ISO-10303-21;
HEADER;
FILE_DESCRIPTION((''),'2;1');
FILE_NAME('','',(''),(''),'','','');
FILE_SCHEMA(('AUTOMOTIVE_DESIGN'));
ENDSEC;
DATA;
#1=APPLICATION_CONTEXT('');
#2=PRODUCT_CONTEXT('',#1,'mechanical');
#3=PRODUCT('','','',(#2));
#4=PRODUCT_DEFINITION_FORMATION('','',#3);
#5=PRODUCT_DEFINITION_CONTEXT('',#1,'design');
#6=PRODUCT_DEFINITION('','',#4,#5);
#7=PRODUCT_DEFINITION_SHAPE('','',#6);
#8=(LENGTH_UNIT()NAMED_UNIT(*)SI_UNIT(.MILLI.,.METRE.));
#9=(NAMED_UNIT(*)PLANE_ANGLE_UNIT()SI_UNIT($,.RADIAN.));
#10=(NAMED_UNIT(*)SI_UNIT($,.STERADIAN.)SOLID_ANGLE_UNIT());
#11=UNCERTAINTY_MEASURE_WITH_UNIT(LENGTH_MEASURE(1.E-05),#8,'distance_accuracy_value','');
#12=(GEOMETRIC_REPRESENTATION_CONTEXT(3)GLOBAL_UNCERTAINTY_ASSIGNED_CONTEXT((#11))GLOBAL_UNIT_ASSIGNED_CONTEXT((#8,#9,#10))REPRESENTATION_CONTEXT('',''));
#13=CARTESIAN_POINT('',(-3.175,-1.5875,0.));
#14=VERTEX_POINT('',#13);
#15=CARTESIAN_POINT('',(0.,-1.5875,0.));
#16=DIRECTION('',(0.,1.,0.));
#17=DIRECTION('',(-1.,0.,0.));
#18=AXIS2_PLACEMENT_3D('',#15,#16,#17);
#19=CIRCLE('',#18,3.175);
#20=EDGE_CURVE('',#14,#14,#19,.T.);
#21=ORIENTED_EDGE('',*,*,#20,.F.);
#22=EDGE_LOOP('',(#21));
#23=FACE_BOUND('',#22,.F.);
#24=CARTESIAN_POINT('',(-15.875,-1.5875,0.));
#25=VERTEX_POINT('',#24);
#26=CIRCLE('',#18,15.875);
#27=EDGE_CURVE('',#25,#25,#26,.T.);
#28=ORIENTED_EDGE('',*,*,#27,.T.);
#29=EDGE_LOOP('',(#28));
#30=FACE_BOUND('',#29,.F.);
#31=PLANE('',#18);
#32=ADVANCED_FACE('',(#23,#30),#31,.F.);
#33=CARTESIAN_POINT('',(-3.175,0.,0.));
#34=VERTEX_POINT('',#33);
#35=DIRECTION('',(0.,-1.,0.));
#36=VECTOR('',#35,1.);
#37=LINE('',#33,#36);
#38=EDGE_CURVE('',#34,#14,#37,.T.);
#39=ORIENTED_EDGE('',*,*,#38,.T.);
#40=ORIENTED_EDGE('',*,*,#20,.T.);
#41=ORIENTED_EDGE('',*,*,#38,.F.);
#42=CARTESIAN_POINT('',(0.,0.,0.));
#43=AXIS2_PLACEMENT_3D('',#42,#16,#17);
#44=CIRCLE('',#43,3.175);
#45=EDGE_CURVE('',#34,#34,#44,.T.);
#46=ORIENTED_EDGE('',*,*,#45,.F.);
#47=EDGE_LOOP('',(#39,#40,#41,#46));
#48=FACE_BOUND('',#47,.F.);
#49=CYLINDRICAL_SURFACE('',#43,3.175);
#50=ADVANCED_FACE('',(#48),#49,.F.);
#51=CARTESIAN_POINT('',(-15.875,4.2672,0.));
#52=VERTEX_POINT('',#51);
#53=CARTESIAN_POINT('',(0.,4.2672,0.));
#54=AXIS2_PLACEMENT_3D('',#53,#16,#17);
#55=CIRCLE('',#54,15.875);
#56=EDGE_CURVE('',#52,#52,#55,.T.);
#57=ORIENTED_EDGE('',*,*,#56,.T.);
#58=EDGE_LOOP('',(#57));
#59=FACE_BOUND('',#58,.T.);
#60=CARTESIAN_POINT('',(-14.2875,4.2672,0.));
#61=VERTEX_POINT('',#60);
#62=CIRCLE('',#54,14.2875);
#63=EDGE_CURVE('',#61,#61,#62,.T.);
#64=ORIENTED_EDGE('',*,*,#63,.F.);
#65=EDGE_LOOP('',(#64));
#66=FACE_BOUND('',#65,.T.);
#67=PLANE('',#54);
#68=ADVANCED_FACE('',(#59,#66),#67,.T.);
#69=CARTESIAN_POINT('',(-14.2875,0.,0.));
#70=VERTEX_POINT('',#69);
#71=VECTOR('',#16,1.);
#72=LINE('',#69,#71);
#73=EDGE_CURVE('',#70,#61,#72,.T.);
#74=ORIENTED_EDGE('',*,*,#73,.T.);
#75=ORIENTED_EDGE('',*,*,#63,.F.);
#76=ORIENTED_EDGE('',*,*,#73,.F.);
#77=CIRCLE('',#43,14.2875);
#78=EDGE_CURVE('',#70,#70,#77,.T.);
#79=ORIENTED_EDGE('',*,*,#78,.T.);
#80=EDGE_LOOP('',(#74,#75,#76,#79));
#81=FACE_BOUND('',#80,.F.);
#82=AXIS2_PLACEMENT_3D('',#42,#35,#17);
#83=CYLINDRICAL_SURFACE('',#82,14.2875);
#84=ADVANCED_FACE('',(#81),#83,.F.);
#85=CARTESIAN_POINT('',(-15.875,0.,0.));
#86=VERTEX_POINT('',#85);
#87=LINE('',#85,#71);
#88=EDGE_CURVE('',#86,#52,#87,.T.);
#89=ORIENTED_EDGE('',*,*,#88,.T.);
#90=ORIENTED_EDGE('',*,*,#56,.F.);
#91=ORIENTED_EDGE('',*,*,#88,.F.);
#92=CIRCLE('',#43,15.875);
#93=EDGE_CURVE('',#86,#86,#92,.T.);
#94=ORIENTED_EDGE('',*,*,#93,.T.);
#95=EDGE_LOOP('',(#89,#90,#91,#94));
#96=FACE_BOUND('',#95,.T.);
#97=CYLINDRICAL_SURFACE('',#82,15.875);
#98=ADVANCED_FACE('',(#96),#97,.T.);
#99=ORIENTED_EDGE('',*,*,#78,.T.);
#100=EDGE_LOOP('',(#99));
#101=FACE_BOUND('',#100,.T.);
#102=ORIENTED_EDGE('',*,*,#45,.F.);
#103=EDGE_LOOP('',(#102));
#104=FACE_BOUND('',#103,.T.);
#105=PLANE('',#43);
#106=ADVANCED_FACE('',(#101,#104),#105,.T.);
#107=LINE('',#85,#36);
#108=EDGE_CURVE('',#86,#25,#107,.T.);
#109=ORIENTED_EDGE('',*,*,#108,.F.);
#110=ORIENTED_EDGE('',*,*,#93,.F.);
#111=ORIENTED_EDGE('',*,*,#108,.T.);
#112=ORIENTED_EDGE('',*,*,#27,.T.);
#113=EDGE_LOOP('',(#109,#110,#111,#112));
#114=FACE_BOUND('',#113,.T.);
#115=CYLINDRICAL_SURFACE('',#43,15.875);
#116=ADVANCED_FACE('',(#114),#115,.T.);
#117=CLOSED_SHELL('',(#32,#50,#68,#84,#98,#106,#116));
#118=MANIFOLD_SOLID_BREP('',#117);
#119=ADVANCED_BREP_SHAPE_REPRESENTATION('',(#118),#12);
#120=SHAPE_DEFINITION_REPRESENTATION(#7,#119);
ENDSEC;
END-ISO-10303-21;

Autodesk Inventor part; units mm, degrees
ref_plane "YZ Plane" through (0, 0, 0) normal (1, 0, 0) x (0, 1, 0)
ref_plane "XZ Plane" through (0, 0, 0) normal (0, 1, 0) x (-1, 0, 0)
ref_plane "XY Plane" through (0, 0, 0) normal (0, 0, 1) x (1, 0, 0)
sketch "Sketch1" plane through (0, 0, 0) normal (0, 1, 0) x (-1, 0, 0)
  circle A0 centre (0, 0) radius 3.175
  circle A1 centre (0, 0) radius 14.2875
  circle A2 centre (0, 0) radius 15.875
  dimension "d1" = 6.35
  dimension "d7" = 28.575
  dimension "d8" = 1.5875
extrude "Extrusion1" add sketch "Sketch1" along normal blind 4.2672 contours A2
extrude "Extrusion2" add sketch "Sketch1" against normal blind 1.5875 contours A1 | A2
properties part number "FlipperDriveShaftCap" material "Nylon 6/6"
